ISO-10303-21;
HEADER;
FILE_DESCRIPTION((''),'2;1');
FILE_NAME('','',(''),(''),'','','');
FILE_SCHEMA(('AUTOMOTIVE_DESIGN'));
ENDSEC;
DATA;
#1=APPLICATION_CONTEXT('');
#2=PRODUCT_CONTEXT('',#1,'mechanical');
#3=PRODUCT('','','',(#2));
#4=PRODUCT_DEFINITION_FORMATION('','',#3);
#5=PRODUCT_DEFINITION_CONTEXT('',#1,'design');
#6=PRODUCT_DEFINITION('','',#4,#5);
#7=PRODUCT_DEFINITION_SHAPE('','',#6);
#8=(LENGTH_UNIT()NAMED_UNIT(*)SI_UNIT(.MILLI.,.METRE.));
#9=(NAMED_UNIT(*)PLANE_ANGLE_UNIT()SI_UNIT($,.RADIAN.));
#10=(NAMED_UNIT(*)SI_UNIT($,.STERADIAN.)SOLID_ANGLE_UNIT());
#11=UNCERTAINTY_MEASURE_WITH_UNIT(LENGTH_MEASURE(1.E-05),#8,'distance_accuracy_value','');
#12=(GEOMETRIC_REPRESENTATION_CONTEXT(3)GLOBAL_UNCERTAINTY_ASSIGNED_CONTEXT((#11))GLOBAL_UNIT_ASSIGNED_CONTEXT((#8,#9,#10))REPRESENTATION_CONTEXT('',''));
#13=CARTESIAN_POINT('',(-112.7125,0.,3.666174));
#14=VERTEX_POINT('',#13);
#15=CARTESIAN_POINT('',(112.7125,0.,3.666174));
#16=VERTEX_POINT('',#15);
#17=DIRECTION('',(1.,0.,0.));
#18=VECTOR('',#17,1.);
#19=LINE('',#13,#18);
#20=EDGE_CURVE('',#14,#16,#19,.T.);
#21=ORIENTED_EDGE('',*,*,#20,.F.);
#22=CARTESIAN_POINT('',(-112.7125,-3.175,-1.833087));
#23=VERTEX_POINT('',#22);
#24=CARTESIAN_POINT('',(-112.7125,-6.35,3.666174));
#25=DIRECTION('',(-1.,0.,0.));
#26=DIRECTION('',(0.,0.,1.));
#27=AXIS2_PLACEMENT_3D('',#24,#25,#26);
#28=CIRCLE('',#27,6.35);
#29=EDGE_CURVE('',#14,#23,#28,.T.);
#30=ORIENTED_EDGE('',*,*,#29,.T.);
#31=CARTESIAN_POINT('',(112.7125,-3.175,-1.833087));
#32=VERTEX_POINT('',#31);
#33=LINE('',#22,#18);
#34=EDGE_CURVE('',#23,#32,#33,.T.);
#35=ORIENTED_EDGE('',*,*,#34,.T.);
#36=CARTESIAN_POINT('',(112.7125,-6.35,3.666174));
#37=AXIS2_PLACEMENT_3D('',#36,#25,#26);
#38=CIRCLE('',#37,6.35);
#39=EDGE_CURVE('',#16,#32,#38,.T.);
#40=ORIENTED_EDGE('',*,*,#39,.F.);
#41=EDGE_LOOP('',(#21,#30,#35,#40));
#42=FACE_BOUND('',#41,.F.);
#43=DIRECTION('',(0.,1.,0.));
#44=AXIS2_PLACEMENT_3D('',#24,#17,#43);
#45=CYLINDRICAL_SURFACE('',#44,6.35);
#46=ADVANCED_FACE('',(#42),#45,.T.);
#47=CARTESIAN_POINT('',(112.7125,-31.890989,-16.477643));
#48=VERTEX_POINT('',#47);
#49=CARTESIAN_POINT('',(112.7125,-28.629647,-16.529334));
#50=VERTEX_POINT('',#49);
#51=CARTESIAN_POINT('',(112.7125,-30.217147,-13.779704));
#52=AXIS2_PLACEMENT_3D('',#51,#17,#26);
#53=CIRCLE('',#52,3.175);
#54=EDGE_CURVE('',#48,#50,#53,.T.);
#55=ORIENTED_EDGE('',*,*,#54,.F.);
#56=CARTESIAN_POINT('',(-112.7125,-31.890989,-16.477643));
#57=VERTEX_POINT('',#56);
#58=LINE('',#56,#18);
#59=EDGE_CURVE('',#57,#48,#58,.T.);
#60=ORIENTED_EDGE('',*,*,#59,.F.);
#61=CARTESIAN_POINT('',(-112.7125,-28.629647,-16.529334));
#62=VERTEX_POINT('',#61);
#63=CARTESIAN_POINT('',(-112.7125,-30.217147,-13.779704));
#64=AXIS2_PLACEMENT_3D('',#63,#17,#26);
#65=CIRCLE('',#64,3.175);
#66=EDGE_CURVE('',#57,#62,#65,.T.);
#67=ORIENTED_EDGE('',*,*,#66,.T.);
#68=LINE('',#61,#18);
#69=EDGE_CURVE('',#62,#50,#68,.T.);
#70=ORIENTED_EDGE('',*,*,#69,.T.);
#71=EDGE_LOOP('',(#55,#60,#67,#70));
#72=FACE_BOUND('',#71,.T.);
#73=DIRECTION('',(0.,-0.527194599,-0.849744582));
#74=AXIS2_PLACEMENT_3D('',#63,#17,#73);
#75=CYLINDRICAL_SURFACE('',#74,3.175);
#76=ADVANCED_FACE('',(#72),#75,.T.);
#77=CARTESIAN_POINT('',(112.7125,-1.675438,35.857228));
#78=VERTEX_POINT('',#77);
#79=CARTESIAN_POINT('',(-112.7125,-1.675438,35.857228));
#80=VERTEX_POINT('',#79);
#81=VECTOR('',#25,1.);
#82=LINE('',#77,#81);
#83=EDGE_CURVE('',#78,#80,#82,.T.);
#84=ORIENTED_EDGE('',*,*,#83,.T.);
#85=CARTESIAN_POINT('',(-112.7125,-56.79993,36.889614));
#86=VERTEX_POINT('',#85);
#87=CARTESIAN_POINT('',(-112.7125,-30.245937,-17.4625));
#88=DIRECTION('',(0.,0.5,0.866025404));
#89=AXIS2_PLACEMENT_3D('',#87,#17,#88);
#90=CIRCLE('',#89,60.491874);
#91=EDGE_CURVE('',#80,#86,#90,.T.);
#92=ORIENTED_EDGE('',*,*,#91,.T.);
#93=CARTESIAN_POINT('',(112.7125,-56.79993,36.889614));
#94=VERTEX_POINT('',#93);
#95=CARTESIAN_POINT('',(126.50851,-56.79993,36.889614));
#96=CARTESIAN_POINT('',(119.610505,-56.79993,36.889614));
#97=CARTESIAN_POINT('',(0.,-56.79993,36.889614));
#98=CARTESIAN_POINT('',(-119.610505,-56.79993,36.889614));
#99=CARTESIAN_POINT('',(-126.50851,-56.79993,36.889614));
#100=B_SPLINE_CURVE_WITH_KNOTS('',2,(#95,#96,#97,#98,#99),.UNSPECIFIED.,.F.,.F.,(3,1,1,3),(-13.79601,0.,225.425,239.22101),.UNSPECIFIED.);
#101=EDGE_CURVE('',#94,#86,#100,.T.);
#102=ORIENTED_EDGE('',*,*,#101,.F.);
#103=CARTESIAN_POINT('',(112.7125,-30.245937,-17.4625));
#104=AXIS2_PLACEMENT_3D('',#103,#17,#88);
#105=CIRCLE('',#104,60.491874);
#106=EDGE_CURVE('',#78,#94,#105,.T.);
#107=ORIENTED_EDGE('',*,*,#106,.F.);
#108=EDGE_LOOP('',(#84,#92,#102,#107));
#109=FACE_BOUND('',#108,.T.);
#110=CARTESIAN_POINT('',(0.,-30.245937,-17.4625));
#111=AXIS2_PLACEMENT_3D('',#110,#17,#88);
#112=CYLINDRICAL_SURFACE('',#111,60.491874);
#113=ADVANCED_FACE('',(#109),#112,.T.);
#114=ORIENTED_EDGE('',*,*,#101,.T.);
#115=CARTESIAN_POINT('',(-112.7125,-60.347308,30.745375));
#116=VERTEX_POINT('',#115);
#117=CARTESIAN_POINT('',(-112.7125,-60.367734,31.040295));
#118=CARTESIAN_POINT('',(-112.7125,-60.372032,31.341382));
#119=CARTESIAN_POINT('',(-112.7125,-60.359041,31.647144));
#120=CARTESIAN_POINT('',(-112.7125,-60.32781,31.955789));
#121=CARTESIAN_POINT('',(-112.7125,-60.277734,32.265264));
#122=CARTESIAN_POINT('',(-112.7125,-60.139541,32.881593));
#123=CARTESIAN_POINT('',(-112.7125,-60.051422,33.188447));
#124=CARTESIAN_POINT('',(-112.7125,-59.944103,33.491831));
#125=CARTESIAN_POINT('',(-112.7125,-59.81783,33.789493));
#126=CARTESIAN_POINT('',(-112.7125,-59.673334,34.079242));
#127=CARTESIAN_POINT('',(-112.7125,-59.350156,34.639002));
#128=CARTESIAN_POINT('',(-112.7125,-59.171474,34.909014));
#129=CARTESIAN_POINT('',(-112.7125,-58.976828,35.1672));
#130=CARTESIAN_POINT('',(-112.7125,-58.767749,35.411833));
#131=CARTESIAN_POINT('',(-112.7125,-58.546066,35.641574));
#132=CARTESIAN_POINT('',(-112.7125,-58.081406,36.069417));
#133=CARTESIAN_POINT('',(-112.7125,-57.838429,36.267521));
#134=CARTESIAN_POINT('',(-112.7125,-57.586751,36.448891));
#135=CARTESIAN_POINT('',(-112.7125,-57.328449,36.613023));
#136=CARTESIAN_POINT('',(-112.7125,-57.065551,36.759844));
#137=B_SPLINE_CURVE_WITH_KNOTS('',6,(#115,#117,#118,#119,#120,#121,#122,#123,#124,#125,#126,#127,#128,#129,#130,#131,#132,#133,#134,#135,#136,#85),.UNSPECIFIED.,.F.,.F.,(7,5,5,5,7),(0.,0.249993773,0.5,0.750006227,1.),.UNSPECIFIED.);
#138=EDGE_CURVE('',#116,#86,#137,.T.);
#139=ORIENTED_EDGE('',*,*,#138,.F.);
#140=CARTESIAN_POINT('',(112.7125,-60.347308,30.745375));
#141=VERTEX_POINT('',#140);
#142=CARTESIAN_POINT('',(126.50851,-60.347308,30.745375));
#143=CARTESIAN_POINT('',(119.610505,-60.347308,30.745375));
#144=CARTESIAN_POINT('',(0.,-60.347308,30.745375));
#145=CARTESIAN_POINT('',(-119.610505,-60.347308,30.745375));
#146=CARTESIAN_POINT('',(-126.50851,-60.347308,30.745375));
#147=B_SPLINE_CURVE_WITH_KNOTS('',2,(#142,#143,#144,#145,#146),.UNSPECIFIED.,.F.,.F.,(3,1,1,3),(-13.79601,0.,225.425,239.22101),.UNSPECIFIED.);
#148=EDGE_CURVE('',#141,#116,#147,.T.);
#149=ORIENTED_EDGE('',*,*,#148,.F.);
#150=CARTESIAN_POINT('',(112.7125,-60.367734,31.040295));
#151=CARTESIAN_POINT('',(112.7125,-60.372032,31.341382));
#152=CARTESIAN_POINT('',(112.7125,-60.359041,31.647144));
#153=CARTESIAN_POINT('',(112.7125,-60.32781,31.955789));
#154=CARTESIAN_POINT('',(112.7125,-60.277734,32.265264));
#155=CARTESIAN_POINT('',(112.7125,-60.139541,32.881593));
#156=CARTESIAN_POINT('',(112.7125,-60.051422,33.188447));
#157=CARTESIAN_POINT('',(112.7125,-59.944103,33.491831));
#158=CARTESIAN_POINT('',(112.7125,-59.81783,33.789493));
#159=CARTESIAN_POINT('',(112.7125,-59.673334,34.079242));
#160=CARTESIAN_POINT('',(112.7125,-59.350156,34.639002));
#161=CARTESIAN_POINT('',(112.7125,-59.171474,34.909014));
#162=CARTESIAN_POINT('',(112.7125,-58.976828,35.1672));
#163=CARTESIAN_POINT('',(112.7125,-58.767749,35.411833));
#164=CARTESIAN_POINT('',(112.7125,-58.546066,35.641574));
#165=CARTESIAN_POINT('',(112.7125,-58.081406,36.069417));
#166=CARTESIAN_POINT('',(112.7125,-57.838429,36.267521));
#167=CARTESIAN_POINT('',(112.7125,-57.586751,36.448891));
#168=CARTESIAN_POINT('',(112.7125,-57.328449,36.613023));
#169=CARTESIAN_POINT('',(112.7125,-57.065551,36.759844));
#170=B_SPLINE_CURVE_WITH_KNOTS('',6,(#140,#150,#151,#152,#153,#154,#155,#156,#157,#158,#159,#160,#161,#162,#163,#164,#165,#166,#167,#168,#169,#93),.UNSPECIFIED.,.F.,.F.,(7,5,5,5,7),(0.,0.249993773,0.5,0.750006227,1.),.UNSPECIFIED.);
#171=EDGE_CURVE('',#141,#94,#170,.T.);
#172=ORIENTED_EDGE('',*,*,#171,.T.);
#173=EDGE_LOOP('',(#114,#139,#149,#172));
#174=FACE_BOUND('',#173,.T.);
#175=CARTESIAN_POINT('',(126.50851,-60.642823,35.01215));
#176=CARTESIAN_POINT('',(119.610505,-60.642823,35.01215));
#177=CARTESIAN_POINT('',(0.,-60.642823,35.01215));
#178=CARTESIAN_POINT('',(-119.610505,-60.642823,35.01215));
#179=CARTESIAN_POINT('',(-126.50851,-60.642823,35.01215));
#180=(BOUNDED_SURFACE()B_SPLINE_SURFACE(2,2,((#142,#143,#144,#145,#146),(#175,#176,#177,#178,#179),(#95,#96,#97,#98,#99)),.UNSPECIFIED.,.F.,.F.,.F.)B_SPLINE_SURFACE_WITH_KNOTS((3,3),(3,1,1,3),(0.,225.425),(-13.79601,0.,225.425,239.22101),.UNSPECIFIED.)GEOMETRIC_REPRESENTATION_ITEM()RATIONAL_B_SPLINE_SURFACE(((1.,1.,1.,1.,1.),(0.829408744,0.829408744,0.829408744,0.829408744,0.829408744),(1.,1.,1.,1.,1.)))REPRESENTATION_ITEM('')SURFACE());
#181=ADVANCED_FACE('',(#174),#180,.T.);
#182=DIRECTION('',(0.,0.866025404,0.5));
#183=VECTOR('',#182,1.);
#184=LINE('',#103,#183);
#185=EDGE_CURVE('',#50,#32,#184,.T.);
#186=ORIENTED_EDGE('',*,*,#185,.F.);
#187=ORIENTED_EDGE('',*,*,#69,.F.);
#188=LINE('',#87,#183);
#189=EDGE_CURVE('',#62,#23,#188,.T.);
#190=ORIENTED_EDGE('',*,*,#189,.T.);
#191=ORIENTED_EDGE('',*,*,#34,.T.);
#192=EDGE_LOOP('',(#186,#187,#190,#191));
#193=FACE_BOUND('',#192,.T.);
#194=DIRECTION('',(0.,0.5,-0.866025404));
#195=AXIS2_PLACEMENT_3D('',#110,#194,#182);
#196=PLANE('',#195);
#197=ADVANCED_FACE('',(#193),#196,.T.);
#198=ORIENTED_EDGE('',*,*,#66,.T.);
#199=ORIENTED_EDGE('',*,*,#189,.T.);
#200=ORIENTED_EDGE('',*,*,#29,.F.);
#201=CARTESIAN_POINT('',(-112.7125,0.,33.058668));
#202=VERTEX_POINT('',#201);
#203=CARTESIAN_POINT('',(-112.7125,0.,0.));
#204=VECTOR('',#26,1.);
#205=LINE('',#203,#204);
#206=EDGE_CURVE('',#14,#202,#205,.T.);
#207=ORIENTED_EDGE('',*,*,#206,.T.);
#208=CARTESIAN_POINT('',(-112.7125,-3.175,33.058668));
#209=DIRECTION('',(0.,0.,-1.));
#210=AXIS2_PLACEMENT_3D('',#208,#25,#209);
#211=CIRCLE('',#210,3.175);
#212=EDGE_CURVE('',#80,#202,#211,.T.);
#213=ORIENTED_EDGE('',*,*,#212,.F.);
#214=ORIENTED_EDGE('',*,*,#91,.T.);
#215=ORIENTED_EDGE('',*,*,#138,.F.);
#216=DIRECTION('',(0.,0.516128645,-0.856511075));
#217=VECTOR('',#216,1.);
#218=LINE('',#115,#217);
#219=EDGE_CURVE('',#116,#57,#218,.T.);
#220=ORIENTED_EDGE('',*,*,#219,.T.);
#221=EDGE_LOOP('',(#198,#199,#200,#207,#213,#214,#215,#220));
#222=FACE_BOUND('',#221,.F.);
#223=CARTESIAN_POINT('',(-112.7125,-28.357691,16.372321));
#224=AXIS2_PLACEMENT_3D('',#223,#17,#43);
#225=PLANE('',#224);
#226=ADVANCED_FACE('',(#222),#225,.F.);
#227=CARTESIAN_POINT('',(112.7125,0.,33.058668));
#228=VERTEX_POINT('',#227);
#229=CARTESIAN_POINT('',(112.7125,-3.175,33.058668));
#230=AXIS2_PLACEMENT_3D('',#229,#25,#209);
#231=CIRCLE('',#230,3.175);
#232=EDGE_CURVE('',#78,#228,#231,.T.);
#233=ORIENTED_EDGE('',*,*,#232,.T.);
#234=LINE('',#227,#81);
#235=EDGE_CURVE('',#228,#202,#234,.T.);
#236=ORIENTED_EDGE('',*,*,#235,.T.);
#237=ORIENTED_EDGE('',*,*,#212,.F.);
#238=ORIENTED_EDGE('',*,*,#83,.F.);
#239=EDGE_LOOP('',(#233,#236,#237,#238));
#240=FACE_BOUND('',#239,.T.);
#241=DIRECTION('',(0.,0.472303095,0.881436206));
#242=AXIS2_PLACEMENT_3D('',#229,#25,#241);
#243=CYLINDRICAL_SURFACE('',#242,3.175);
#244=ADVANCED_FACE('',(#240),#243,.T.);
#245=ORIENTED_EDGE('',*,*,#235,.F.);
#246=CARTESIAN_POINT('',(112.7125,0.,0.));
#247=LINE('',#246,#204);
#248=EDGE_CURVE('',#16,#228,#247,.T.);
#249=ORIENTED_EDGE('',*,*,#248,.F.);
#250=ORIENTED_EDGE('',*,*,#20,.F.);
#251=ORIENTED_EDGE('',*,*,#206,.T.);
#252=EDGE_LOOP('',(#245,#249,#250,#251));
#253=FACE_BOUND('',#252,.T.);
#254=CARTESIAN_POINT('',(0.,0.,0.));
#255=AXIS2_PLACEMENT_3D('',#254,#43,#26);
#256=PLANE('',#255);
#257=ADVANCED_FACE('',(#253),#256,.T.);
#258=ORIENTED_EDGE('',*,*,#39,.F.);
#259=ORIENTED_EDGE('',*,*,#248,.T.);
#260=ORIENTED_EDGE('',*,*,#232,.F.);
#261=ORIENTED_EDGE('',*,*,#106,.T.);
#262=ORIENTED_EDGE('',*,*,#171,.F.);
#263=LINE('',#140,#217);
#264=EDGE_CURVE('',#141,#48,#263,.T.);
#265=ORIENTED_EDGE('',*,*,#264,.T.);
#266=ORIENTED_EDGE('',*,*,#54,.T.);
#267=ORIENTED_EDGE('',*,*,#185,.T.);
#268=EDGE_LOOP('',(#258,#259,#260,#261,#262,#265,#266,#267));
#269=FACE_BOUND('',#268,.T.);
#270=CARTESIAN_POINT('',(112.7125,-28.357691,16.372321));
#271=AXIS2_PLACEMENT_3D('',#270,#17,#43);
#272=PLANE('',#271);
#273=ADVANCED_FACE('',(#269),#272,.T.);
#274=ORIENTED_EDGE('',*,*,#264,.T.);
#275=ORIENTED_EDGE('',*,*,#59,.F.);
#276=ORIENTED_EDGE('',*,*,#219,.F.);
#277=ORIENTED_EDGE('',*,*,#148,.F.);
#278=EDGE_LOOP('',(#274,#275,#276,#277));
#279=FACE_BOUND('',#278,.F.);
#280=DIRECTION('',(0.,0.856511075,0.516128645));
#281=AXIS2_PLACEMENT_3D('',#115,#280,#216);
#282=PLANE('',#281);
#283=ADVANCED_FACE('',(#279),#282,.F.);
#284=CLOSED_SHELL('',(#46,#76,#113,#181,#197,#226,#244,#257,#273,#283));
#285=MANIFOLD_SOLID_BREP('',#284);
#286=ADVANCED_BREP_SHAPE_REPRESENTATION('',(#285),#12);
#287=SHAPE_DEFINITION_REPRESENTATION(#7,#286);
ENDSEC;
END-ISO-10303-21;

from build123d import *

# Parameters (mm, degrees)
F1_DEPTH = 112.7125
F2_R     = 6.35
F3_R     = 3.175
F5_DEPTH = 225.425


# Not quite as in the source:
# - a feature of the source that left no trace in its solid (it failed there, or was rolled back) is left out


with BuildPart() as f1:
    # F0 (on Right) → F1 (new body, symmetric)
    with BuildSketch(Plane.YZ):
        with BuildLine():
            ThreePointArc((-60.4918744543, 34.925), (-52.3875, 4.6790627728), (-30.2459372272, -17.4625))
            Line((-30.2459372272, -17.4625), (0, 0))
            Line((0, 0), (0, 34.925))
            ThreePointArc((0, 34.925), (-30.2459372272, 43.0293744543), (-60.4918744543, 34.925))
        make_face()
    extrude(amount=F1_DEPTH, both=True)

    # F2
    f2_edges = [f1.edges().sort_by_distance(p)[0] for p in [
        (0, -60.491874, 34.925),
        (0, 0, 0),
    ]]
    fillet(f2_edges, radius=F2_R)

    # F3
    f3_edges = [f1.edges().sort_by_distance(p)[0] for p in [
        (0, 0, 34.925),
        (0, -30.245937, -17.4625),
    ]]
    fillet(f3_edges, radius=F3_R)

    # F4 (on face) → F5 (cut, through all)
    with BuildSketch(Plane(origin=(-112.7125, 0, 0), x_dir=(0, -1, 0), z_dir=(-1, 0, 0))):
        Polygon((66.0401198141, 27.3149197272), (60.347308239, 30.7453752193), (31.890989487, -16.4776425833), (37.5838010621, -19.9080980754), align=None)
    extrude(amount=-F5_DEPTH, mode=Mode.SUBTRACT)


solid = f1.part
